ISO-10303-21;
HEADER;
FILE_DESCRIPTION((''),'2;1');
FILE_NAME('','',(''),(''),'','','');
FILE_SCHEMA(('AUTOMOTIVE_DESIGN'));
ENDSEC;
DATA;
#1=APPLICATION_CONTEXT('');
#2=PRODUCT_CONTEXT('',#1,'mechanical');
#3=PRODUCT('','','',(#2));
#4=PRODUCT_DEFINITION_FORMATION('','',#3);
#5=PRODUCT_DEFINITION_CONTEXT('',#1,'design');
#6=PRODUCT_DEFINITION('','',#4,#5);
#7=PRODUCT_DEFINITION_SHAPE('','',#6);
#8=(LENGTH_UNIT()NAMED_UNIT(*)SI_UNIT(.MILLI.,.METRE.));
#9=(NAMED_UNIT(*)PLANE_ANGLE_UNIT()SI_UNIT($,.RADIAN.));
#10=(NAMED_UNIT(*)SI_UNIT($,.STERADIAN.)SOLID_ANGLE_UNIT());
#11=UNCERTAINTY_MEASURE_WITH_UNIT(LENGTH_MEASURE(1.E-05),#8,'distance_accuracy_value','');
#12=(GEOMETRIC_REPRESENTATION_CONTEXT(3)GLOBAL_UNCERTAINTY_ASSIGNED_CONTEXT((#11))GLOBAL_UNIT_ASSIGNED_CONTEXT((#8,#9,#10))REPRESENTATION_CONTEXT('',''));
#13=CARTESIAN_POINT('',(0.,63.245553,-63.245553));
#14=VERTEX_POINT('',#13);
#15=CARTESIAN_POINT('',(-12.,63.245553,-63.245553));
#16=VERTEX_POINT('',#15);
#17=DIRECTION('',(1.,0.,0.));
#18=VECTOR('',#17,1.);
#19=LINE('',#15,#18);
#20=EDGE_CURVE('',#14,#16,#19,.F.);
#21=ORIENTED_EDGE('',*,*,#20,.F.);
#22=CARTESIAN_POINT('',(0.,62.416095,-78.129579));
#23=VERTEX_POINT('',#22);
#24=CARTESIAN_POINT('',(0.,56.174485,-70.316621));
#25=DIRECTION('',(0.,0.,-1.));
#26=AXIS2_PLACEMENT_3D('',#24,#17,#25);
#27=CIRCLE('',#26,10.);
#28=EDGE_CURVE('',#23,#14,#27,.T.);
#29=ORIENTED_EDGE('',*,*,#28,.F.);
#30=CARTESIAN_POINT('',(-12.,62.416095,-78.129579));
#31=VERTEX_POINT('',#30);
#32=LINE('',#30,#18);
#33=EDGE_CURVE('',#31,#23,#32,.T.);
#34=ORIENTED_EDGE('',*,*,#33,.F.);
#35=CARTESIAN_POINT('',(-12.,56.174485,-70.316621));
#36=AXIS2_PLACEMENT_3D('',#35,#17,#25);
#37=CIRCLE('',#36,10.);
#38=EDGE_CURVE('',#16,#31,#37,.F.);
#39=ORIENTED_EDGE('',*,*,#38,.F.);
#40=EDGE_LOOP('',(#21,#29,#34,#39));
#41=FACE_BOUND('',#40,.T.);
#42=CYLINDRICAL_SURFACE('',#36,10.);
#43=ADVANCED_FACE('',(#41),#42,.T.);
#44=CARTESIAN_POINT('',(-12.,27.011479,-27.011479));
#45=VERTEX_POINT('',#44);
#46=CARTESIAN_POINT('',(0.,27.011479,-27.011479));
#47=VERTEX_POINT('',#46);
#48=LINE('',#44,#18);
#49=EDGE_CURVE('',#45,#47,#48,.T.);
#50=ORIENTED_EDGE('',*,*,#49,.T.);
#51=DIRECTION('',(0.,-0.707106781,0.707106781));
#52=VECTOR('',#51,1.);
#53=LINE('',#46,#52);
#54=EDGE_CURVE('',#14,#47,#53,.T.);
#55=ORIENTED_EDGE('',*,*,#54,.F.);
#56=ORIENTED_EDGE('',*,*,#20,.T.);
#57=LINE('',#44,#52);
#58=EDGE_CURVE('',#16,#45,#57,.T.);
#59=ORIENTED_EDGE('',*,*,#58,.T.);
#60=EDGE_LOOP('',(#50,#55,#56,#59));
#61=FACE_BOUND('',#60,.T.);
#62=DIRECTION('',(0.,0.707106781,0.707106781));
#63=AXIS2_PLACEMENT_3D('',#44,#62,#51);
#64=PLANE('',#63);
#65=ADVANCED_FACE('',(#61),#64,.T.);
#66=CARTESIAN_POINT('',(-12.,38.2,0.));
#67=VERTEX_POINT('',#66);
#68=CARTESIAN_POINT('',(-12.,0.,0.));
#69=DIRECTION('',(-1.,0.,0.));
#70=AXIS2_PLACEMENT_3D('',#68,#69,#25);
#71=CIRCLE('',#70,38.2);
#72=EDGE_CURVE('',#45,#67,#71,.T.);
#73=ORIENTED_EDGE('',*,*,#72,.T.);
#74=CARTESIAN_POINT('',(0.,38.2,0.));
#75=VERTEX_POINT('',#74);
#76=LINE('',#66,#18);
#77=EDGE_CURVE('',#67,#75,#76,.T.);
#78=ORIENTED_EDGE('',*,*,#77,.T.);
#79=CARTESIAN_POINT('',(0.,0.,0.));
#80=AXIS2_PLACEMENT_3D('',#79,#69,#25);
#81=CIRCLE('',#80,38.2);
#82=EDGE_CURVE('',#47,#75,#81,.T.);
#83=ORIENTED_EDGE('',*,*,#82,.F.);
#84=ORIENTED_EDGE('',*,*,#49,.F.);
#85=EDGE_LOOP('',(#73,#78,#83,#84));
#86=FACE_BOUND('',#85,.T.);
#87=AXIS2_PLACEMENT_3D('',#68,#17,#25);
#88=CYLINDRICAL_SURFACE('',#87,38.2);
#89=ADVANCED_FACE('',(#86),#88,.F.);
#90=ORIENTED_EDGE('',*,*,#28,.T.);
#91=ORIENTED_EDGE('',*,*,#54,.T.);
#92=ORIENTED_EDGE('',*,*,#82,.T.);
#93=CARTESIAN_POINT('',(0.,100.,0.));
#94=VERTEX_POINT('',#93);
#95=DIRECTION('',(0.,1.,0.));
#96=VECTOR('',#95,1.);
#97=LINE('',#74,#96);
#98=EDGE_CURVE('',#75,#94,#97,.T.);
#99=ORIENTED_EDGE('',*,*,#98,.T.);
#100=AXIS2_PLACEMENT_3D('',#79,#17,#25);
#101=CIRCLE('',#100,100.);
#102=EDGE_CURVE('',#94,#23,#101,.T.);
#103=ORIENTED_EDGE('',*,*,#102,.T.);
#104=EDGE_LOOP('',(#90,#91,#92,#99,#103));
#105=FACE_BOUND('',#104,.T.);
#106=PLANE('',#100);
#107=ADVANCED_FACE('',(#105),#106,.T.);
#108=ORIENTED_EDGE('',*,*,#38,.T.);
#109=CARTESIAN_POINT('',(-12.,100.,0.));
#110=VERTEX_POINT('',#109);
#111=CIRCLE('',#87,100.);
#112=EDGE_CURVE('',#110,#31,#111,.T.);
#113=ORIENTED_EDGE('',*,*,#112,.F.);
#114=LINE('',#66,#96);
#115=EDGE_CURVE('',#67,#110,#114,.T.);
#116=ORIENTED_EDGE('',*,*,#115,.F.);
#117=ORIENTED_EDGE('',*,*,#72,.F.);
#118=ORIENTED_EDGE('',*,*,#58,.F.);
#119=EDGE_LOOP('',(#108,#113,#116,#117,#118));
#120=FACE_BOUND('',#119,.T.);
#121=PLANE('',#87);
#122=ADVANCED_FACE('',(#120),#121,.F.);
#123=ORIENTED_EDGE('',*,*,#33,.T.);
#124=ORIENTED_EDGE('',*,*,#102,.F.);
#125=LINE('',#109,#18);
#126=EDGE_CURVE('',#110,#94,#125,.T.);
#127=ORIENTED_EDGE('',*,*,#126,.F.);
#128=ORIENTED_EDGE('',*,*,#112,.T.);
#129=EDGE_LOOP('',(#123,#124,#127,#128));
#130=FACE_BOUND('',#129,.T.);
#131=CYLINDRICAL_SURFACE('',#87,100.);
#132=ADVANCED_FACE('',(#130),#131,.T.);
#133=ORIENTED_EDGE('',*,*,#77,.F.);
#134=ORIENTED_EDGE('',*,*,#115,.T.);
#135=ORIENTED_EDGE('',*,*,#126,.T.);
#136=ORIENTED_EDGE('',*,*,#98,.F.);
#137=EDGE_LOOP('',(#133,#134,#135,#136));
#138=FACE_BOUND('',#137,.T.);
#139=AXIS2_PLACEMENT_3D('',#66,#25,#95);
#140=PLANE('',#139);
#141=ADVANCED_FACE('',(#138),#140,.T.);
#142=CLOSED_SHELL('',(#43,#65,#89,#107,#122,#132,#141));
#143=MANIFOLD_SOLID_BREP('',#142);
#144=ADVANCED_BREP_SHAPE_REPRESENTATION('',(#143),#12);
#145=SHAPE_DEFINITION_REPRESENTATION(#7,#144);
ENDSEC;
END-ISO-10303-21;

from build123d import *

# Parameters (mm, degrees)
SM_BASE_FLANGE_1_DEPTH = 12
FILLET_1_R             = 10


# Sheet-metal steps are written as plain solids
with BuildPart() as part:
    # Sketch 1 → Базовая кромка1 (new body)
    with BuildSketch(Plane(origin=(0, 0, 0), x_dir=(0, 0, -1), z_dir=(1, 0, 0))):
        with BuildLine():
            Line((0, 38.2), (0, 100))
            ThreePointArc((0, 100), (-38.268343237, -92.387953251), (70.710678119, 70.710678119))
            Line((70.710678119, 70.710678119), (27.011479041, 27.011479041))
            ThreePointArc((27.011479041, 27.011479041), (-14.618507116, -35.292198142), (0, 38.2))
        make_face()
    extrude(amount=-SM_BASE_FLANGE_1_DEPTH)

    # Скругление1
    fillet_1_edges = [part.edges().sort_by_distance(p)[0] for p in [
        (-6, 70.710678119, -70.710678119),
    ]]
    fillet(fillet_1_edges, radius=FILLET_1_R)


solid = part.part
